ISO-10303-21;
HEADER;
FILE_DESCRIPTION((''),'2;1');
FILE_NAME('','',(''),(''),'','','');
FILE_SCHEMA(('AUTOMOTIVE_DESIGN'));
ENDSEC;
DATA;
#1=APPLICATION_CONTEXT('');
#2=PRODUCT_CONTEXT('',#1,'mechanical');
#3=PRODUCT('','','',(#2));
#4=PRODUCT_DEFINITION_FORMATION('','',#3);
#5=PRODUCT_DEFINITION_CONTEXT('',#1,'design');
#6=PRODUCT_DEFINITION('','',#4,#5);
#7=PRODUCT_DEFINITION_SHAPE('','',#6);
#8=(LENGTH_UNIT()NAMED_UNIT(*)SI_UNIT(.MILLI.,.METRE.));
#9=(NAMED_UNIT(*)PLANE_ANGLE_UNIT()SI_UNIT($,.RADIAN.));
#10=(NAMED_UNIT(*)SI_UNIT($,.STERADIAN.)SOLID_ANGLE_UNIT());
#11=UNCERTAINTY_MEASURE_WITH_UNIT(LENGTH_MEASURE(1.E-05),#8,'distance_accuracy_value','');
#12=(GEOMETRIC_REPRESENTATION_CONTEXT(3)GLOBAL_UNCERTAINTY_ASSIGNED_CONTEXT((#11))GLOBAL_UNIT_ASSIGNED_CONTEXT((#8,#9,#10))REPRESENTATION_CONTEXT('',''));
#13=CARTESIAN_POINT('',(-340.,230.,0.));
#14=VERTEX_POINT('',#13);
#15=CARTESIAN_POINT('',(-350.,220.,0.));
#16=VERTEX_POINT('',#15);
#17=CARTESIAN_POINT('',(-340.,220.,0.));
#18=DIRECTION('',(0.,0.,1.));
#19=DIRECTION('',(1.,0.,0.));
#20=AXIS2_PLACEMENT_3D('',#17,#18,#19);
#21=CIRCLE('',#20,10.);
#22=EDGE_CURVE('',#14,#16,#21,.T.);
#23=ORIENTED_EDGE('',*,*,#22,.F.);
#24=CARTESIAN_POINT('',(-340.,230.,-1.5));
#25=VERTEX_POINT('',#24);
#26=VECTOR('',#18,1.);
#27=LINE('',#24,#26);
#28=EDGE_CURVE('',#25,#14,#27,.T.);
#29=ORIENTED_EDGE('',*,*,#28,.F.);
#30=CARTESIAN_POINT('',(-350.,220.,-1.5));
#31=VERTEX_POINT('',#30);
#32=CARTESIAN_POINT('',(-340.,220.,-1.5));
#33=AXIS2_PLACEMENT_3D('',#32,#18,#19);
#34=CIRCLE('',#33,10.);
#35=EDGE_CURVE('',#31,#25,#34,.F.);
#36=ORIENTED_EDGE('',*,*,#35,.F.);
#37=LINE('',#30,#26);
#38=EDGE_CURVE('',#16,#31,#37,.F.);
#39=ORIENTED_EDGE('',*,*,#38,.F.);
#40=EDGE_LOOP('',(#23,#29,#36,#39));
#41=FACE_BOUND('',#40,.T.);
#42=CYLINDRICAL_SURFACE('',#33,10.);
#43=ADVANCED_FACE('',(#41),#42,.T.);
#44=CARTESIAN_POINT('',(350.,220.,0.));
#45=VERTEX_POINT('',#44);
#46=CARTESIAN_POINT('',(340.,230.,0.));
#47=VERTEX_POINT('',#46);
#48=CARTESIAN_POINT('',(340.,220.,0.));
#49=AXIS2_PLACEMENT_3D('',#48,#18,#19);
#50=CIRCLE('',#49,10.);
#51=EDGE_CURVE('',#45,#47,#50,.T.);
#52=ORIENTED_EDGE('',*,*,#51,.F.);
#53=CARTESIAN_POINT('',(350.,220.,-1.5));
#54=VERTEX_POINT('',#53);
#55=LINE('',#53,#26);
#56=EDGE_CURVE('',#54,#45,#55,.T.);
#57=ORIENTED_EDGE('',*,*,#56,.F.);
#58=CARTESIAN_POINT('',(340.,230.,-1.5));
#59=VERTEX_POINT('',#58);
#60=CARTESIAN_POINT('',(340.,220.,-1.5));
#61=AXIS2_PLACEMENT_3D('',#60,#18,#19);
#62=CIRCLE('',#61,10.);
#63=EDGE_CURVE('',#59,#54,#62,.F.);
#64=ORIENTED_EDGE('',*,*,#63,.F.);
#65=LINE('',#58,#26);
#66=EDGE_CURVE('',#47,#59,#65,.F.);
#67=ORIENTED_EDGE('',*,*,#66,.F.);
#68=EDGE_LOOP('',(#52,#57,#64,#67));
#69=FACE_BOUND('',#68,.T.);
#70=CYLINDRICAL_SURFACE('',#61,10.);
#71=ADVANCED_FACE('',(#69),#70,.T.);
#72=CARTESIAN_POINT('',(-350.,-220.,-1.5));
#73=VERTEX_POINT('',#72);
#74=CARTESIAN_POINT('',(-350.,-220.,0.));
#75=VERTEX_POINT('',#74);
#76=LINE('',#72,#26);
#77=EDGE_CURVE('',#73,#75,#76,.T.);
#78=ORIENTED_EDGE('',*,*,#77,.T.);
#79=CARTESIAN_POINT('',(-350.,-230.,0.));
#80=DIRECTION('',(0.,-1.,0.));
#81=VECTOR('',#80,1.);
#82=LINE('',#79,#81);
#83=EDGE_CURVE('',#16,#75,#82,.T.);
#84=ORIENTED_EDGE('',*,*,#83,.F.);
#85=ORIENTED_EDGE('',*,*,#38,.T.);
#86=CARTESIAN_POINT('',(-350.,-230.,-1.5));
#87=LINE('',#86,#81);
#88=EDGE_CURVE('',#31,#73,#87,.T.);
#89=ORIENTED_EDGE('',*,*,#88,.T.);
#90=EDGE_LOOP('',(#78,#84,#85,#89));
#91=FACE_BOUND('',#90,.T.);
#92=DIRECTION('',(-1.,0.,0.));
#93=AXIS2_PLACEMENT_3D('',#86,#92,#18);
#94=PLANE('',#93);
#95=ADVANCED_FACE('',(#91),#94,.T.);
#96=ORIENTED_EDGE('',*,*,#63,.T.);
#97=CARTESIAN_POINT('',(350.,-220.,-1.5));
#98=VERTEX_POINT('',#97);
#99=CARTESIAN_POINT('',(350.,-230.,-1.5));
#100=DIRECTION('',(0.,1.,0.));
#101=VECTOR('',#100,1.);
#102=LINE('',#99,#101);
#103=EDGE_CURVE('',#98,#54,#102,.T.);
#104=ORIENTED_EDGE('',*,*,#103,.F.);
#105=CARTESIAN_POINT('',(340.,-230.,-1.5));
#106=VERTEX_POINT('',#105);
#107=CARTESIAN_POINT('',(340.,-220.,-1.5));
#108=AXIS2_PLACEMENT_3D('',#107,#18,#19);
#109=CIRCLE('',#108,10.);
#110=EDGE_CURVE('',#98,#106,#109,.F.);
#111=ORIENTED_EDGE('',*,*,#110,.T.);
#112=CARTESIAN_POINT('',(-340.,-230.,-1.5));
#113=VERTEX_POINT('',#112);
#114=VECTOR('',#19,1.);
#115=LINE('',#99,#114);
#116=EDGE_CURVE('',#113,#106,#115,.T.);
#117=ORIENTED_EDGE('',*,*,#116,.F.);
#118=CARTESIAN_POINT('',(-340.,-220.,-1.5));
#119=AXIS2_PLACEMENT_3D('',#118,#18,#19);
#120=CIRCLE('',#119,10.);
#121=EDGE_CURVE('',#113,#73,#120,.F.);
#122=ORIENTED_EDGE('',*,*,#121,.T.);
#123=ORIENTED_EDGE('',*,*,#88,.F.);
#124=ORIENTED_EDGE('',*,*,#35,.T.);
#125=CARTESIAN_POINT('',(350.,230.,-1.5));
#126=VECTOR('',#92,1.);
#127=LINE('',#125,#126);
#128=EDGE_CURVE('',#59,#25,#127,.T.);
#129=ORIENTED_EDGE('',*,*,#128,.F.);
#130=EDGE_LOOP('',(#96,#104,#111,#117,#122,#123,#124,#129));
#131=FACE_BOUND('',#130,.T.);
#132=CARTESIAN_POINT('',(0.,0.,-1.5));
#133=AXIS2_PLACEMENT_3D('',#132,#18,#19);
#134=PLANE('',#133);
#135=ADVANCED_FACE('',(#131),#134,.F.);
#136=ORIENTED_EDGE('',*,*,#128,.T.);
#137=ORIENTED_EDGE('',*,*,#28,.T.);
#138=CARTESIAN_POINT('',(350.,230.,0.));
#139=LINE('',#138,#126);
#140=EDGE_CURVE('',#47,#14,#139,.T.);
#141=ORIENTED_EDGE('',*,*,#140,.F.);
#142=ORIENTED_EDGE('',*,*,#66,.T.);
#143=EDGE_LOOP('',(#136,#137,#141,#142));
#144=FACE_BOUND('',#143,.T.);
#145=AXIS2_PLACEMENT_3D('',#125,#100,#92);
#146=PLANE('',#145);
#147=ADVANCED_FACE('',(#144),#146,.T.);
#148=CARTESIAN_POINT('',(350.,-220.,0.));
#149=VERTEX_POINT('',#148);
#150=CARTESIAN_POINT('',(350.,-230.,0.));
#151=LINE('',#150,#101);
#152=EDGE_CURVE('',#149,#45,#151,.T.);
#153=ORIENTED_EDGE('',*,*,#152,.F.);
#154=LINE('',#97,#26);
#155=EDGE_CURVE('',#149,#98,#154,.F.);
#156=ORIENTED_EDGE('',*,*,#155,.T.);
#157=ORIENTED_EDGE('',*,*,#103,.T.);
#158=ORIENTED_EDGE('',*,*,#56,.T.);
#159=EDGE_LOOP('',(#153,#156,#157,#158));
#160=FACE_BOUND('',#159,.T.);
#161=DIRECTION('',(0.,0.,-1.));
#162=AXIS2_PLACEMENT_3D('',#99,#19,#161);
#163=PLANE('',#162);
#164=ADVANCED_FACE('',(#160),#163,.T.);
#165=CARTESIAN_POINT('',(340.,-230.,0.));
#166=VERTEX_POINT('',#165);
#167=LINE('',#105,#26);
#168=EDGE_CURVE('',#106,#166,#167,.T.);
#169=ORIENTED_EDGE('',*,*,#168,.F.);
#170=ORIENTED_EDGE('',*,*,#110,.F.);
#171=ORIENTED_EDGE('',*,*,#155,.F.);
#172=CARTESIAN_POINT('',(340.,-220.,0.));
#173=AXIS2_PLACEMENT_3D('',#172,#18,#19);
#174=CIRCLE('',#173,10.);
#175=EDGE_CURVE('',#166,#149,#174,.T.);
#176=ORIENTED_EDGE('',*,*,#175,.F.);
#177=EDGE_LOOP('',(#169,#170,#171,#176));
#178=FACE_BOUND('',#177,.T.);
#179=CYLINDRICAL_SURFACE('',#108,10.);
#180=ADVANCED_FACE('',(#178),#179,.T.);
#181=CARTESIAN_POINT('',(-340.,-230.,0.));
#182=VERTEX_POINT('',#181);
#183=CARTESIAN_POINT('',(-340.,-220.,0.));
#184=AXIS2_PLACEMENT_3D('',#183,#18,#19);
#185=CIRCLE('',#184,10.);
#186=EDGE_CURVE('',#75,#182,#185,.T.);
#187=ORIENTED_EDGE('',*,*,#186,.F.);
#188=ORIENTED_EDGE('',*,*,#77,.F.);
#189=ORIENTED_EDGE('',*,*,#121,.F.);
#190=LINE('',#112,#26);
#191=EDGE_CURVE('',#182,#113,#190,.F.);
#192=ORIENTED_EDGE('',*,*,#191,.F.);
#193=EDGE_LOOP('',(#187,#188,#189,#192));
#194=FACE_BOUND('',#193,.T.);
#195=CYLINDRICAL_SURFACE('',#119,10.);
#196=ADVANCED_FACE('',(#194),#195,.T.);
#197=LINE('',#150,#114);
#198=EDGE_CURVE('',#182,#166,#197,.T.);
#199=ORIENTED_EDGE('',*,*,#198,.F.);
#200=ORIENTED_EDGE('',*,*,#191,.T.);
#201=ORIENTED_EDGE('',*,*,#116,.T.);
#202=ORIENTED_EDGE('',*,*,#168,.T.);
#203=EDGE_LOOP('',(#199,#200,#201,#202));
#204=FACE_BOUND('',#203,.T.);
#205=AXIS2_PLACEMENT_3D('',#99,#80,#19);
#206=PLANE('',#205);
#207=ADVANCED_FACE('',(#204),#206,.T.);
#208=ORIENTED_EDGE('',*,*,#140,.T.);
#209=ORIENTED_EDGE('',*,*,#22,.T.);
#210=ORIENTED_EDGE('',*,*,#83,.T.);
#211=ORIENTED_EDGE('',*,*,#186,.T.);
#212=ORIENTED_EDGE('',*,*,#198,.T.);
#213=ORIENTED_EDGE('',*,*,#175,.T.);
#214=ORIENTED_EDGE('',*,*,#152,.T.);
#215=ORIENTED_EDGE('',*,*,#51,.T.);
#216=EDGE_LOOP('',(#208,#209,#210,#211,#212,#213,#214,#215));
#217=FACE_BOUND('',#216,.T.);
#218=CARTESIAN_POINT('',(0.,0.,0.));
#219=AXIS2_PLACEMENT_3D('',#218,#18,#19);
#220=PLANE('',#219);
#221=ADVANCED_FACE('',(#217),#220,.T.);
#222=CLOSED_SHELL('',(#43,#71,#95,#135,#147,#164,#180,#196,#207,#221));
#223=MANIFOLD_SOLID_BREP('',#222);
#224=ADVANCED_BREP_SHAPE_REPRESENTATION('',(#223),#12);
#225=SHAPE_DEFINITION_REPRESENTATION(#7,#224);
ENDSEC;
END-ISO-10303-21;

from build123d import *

# Parameters (mm, degrees)
SKETCH1_W          = 700
SKETCH1_H          = 460
BASE_FLANGE1_DEPTH = 1.5
FILLET1_R          = 10


# Sheet-metal steps are written as plain solids
with BuildPart() as part:
    # Sketch1 → Base-Flange1 (new body)
    with BuildSketch(Plane.XY):
        Rectangle(SKETCH1_W, SKETCH1_H)
    extrude(amount=-BASE_FLANGE1_DEPTH)

    # Fillet1
    fillet1_edges = [part.edges().sort_by_distance(p)[0] for p in [
        (-350, 230, -0.75),
        (350, 230, -0.75),
        (350, -230, -0.75),
        (-350, -230, -0.75),
    ]]
    fillet(fillet1_edges, radius=FILLET1_R)


solid = part.part
